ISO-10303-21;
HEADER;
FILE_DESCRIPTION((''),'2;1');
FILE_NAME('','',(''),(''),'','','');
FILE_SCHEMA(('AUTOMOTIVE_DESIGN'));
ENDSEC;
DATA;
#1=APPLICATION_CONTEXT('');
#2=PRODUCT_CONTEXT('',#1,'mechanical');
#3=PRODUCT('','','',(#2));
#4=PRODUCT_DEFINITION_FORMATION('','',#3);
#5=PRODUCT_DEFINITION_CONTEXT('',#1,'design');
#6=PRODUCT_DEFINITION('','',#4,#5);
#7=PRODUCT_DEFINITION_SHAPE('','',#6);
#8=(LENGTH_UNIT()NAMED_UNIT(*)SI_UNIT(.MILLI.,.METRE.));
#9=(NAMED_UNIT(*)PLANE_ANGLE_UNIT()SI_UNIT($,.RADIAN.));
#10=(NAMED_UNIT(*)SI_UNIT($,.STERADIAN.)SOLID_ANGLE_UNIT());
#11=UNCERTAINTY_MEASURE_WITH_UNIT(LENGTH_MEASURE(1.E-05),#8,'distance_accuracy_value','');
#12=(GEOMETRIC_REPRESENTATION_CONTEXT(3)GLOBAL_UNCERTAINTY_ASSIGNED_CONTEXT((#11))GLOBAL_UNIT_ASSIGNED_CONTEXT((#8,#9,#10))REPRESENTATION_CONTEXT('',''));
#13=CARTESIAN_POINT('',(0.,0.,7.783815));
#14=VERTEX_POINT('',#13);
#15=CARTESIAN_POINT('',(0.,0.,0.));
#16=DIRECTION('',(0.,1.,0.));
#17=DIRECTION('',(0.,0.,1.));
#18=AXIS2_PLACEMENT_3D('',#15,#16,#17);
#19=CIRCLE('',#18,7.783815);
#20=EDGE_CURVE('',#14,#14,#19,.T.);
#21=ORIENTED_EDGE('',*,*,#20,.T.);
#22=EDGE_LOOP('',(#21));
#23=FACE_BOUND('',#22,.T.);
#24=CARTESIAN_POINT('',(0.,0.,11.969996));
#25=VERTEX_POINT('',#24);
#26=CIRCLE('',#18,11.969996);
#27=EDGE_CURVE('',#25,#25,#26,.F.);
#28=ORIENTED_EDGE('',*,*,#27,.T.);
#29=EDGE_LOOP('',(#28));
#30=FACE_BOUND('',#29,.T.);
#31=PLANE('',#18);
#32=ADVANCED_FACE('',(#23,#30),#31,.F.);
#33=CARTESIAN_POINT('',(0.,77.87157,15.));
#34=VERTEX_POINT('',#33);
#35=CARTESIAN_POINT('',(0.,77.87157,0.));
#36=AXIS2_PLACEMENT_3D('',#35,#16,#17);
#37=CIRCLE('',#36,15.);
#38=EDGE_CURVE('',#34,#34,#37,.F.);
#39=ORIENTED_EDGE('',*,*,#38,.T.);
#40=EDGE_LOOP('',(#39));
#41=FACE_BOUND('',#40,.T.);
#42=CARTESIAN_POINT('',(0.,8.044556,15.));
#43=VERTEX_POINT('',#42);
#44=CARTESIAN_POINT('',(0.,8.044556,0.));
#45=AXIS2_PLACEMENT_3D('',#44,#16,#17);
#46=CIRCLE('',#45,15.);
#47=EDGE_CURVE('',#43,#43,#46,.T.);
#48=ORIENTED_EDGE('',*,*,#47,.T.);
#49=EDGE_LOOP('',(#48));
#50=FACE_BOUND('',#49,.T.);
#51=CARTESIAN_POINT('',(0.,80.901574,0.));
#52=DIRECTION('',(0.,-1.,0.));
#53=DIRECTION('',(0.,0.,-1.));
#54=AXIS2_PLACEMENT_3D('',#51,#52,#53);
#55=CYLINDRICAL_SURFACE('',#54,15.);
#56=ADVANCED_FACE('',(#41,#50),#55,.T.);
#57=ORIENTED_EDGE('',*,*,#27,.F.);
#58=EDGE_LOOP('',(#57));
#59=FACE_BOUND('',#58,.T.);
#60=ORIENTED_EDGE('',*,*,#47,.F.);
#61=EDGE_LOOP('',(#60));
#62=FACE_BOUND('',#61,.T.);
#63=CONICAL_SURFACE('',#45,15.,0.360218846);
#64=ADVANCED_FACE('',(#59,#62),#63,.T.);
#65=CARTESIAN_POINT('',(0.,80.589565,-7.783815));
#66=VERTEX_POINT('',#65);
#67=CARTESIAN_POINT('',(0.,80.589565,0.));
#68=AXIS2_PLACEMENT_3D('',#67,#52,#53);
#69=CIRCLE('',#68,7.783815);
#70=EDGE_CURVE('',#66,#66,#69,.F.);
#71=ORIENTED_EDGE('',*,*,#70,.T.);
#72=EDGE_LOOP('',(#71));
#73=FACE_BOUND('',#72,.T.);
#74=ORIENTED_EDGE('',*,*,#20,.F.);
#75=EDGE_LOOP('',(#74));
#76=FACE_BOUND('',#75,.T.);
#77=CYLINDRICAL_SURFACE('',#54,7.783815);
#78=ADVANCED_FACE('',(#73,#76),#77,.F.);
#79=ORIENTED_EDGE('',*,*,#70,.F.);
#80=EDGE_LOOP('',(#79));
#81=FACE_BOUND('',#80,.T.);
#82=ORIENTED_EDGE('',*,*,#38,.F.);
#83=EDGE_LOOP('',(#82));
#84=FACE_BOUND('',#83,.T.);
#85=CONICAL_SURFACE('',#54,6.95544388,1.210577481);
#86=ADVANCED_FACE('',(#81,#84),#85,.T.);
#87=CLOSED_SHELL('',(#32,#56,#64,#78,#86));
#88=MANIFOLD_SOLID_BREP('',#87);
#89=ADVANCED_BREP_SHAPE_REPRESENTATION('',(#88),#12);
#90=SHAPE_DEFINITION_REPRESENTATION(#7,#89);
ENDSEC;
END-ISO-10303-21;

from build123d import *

# Parameters (mm, degrees)
SKETCH1_R           = 15
BOSS_EXTRUDE1_DEPTH = 80.901574
SKETCH2_R           = 7.783815441
CUT_EXTRUDE1_DEPTH  = 84.636503249
CHAMFER1_SIZE       = 3.030004
CHAMFER1_SIZE_2     = 8.044556


with BuildPart() as part:
    # Sketch1 → Boss-Extrude1 (new body)
    with BuildSketch(Plane(origin=(0, 0, 0), x_dir=(1, 0, 0), z_dir=(0, 1, 0))):
        with Locations(Location((0, 0, 0), (0, 0, 270))):
            Circle(SKETCH1_R)
    extrude(amount=BOSS_EXTRUDE1_DEPTH)

    # Sketch2 → Cut-Extrude1 (cut, through all)
    with BuildSketch(Plane(origin=(0, 0, 0), x_dir=(1, 0, 0), z_dir=(0, 1, 0))):
        with Locations(Location((0, 0, 0), (0, 0, 270))):
            Circle(SKETCH2_R)
    extrude(amount=CUT_EXTRUDE1_DEPTH, mode=Mode.SUBTRACT)

    # Chamfer1
    # the kernel refuses this chamfer: 8.044556, 3.030004 mm, written as the material it takes off along each edge
    with BuildSketch(Plane(origin=(0, 80.901574, 0), x_dir=(0, 0, 1), z_dir=(-1, 0, 0))) as chamfer1_piece_1:
        Polygon((15, -CHAMFER1_SIZE), (15 - CHAMFER1_SIZE_2, 0), (15, 0), align=None)
    revolve(axis=Axis((0, 80.901574, 0), (0, 1, 0)), mode=Mode.SUBTRACT)
    with BuildSketch(Plane(origin=(0, 0, 0), x_dir=(0, 0, 1), z_dir=(-1, 0, 0))) as chamfer1_piece_2:
        Polygon((15, CHAMFER1_SIZE_2), (15 - CHAMFER1_SIZE, 0), (15, 0), align=None)
    revolve(axis=Axis((0, 0, 0), (0, 1, 0)), mode=Mode.SUBTRACT)


solid = part.part
